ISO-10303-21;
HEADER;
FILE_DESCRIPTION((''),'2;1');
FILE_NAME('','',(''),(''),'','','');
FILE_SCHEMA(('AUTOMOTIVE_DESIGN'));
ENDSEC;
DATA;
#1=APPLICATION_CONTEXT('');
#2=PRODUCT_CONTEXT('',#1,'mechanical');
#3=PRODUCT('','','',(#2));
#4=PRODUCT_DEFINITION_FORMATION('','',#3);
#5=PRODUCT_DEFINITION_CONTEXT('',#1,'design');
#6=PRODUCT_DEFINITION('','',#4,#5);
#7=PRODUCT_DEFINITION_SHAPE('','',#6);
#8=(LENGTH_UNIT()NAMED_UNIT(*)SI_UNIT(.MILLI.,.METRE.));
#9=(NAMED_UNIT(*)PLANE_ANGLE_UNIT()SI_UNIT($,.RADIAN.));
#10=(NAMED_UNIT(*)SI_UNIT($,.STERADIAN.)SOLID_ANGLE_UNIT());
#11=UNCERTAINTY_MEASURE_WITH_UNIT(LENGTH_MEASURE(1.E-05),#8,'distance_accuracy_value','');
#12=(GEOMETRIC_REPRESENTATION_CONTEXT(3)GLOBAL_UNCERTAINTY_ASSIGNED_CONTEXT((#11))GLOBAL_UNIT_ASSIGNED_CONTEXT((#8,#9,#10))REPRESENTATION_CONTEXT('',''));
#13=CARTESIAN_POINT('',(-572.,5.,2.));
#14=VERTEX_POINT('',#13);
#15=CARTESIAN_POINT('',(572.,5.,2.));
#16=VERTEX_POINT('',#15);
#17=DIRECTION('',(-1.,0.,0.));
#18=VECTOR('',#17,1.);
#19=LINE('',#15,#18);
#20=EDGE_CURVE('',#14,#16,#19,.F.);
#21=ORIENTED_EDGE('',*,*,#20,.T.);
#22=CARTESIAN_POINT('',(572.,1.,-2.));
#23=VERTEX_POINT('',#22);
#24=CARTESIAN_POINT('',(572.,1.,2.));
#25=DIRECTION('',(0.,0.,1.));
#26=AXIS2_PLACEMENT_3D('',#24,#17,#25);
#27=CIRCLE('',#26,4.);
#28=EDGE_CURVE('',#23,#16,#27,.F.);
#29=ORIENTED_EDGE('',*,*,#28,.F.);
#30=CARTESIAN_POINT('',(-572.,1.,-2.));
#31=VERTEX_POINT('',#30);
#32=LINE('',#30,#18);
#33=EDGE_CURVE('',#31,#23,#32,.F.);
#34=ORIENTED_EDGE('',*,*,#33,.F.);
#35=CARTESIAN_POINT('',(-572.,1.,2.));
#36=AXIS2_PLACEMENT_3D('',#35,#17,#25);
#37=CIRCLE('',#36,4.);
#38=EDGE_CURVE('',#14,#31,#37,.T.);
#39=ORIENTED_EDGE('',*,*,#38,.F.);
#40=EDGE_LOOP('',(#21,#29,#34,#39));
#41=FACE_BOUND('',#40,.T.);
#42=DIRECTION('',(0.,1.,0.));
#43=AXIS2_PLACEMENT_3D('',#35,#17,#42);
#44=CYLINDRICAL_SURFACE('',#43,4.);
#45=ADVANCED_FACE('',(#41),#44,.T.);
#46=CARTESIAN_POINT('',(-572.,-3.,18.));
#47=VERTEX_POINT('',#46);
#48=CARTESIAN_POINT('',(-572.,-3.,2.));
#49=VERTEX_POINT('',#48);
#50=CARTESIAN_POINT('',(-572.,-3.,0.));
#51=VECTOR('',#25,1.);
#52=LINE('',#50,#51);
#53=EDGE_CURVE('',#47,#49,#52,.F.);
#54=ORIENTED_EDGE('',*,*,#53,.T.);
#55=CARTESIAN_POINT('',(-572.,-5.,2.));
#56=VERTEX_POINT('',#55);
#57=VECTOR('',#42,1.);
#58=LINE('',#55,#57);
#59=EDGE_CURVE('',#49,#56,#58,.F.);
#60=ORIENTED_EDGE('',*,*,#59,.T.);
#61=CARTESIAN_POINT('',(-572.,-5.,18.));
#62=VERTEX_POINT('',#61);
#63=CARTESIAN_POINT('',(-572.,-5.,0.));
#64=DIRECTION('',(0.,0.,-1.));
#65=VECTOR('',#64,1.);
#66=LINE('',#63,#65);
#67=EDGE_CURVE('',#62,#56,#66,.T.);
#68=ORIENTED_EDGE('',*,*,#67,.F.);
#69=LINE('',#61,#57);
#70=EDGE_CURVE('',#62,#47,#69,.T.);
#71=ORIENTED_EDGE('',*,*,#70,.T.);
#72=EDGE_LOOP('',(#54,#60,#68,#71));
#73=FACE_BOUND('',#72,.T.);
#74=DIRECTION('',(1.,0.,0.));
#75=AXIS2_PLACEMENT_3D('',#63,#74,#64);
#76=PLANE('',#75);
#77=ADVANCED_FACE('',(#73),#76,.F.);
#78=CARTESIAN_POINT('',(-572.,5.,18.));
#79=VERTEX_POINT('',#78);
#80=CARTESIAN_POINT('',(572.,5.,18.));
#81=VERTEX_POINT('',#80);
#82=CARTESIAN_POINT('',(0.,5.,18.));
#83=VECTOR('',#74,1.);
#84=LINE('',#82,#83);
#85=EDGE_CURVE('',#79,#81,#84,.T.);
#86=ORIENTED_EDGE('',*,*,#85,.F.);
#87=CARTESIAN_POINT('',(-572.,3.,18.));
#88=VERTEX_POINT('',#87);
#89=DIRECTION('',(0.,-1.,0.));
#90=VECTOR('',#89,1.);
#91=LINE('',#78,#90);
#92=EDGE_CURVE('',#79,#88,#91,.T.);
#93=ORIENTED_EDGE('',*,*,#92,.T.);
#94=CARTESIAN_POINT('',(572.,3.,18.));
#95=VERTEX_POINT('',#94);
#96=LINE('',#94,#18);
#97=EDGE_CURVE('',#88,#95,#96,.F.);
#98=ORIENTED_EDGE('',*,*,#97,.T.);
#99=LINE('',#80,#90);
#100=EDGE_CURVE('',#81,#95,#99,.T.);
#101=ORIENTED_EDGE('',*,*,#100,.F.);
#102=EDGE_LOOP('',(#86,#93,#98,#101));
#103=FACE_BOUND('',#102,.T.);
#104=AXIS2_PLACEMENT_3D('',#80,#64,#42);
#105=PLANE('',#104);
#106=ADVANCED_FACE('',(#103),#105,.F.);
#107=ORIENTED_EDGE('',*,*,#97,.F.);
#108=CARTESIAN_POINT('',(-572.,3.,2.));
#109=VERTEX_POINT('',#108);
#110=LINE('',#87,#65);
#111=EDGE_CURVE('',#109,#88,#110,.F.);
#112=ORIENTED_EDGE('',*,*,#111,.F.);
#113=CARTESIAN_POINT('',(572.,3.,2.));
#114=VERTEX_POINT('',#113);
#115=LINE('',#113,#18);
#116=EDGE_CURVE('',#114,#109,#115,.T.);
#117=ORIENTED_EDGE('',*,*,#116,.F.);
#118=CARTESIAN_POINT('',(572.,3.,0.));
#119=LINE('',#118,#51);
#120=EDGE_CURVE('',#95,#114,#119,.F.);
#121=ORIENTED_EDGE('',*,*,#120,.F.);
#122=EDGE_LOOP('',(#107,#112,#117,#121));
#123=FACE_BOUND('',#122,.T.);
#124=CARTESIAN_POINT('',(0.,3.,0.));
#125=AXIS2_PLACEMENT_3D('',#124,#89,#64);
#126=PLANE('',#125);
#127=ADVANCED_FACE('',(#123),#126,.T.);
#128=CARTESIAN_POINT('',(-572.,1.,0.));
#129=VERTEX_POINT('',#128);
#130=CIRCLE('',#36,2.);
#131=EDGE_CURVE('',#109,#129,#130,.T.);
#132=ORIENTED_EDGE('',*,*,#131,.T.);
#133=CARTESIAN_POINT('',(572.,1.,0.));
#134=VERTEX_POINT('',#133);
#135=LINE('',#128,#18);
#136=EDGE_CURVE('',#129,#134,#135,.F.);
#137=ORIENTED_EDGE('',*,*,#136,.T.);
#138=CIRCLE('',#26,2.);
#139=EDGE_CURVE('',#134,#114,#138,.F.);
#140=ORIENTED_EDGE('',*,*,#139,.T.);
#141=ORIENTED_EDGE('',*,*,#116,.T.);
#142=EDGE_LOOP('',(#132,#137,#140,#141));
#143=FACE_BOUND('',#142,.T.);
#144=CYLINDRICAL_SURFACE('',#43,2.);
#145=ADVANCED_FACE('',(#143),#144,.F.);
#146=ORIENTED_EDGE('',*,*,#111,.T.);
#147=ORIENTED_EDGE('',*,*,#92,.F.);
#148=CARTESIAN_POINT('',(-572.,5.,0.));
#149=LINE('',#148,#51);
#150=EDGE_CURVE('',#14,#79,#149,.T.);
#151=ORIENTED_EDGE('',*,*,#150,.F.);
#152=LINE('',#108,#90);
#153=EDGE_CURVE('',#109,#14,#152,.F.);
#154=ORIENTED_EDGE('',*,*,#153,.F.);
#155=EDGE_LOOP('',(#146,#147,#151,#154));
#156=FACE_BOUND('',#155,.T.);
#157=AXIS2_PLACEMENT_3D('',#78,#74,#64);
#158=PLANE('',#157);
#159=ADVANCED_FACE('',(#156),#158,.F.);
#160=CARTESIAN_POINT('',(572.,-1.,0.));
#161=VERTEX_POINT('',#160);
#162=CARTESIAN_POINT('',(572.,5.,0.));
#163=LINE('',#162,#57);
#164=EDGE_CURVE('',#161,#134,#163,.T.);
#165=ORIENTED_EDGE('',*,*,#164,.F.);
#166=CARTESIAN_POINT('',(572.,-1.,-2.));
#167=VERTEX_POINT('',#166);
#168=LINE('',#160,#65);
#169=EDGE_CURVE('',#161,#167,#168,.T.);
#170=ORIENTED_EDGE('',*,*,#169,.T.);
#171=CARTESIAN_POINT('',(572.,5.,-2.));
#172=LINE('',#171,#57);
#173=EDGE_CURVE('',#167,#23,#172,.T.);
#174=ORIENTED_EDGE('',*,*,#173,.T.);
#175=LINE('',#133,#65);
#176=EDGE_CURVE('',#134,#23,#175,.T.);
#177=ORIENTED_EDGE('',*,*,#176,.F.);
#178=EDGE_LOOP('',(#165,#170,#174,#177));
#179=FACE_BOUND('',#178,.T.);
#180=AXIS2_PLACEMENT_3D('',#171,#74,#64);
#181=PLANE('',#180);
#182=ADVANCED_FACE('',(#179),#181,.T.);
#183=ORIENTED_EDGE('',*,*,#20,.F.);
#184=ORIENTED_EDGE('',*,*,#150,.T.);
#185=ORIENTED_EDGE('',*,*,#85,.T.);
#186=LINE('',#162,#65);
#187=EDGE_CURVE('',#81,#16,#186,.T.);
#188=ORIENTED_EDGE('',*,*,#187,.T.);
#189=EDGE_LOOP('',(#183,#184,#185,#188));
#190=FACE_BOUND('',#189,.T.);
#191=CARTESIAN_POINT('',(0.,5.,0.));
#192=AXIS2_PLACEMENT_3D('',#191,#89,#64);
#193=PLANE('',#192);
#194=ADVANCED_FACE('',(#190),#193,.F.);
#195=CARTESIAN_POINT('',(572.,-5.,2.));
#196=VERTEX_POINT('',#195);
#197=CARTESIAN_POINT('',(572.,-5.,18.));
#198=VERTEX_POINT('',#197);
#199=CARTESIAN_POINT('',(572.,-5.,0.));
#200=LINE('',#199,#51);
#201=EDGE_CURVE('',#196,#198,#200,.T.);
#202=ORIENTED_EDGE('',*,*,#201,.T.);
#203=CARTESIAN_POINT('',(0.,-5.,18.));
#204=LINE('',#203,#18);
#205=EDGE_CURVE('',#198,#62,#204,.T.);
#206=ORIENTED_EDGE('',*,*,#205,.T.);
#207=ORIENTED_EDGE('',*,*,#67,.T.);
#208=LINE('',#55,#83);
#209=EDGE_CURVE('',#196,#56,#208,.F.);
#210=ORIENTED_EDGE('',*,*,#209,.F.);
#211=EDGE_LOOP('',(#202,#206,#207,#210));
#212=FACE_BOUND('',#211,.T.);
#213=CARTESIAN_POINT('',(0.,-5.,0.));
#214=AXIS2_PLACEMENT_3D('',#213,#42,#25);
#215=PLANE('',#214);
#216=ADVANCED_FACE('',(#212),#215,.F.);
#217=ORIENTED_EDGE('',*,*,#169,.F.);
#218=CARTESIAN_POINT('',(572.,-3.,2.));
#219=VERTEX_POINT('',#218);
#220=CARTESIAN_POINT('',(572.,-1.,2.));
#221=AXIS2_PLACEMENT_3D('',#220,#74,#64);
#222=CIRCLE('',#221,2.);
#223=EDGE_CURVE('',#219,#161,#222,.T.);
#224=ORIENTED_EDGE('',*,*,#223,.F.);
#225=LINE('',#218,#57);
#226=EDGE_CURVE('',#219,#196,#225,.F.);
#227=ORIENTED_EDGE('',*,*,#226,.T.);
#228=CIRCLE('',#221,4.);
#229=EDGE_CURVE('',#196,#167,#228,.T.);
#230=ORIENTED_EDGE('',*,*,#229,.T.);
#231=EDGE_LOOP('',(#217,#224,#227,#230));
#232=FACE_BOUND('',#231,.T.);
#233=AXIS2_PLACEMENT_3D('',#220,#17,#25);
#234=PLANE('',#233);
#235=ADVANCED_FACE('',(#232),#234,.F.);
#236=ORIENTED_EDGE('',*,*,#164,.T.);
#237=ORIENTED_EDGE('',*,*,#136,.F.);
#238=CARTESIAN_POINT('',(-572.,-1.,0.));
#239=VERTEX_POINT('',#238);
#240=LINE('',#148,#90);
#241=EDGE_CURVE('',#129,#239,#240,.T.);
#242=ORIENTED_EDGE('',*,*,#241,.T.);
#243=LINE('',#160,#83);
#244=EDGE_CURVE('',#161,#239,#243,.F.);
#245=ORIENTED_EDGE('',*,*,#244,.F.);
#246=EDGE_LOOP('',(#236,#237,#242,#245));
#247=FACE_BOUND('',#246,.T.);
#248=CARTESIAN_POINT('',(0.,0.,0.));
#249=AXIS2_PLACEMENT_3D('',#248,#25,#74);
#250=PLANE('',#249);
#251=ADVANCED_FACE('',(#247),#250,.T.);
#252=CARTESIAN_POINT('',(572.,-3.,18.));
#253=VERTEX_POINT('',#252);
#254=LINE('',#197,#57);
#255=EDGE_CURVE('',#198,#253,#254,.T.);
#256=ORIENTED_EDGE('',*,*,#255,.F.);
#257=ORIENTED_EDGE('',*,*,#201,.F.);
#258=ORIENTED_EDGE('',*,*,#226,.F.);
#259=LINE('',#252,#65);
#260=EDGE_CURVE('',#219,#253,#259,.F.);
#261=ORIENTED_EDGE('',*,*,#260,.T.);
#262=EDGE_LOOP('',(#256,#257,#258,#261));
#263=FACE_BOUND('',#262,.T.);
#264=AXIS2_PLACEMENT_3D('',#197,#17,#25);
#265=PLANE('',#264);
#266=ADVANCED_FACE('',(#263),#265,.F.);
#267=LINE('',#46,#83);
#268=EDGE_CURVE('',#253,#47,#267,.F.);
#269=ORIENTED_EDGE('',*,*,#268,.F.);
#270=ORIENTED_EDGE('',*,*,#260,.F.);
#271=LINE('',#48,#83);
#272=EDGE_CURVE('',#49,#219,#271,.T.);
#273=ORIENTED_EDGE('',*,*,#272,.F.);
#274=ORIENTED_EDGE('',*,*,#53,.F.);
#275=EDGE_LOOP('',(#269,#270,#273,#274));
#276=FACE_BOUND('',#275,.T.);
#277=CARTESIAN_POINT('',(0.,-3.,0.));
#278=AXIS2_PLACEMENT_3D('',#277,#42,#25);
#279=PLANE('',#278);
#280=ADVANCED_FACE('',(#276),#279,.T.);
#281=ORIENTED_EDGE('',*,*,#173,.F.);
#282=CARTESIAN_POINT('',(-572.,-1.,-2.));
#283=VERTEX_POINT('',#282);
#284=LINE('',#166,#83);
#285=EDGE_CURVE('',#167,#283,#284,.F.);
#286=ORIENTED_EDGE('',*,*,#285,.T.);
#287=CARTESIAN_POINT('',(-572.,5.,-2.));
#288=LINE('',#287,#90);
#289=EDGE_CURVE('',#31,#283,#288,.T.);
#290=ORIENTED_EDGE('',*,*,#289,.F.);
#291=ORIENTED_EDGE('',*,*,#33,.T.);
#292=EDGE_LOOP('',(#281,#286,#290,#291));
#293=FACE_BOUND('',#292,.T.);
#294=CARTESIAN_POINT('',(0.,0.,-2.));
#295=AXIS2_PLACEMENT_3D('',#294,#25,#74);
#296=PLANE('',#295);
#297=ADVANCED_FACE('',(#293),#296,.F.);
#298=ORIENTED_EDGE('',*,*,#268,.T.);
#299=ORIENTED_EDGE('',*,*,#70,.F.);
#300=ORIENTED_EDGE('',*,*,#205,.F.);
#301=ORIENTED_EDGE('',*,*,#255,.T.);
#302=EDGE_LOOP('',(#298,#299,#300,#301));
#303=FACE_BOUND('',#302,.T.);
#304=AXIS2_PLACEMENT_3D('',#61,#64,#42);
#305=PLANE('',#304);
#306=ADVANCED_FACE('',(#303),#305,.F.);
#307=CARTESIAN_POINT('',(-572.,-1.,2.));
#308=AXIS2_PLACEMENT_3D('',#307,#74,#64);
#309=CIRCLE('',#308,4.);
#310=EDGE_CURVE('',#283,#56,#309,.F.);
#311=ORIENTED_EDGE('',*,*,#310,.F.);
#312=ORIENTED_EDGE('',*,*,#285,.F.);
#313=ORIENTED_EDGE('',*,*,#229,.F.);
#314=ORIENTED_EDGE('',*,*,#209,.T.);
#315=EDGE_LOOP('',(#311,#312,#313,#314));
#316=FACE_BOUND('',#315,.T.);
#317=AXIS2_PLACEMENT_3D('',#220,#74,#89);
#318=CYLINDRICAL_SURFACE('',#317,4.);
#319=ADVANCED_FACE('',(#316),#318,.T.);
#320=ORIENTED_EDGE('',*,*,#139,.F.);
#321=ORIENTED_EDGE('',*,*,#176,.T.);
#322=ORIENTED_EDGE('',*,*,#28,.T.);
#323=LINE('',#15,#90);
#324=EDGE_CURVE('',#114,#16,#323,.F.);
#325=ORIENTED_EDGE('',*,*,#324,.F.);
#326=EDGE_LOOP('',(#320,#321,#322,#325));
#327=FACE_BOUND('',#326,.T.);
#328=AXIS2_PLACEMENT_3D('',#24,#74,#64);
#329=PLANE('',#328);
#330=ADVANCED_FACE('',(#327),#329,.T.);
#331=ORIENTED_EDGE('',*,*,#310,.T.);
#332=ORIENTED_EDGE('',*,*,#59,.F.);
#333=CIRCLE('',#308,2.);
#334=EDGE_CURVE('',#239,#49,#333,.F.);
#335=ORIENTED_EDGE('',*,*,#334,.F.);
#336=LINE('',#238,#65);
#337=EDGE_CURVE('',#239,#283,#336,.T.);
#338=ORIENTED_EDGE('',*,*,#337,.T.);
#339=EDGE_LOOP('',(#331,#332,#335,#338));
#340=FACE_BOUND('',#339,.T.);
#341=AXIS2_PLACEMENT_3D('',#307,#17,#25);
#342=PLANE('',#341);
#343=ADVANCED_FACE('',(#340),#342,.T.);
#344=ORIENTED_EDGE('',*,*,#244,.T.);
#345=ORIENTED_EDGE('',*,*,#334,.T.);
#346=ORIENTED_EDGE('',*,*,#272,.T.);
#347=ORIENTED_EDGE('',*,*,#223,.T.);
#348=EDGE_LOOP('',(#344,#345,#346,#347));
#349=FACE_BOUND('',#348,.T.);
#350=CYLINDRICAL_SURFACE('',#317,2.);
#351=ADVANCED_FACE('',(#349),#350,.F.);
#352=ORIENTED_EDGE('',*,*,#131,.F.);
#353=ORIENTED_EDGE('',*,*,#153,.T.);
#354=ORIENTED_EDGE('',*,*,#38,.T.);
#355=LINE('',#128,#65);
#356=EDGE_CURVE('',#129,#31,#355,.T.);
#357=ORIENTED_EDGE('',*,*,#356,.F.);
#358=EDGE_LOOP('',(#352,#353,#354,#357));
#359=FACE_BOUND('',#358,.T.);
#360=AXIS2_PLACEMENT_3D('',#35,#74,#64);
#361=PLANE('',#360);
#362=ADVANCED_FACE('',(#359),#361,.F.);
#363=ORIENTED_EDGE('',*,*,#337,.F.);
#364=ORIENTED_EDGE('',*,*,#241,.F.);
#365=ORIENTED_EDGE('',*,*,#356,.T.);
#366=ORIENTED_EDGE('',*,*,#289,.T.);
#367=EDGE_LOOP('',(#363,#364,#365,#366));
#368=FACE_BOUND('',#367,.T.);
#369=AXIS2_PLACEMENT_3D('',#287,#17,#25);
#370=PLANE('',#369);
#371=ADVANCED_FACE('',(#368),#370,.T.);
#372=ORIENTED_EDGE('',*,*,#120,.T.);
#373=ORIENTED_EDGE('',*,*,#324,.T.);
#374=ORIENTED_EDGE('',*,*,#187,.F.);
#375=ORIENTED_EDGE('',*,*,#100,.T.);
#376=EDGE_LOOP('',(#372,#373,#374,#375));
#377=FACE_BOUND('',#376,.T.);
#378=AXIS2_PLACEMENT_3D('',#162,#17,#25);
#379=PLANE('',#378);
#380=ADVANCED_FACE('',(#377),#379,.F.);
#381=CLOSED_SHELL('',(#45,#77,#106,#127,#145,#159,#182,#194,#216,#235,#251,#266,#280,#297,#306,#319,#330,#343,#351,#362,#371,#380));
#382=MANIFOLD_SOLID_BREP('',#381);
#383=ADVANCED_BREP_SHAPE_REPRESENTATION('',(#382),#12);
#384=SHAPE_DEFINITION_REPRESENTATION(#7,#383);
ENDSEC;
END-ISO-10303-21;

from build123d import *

# Parameters (mm, degrees)
SKETCH_1_W                         = 1144
SKETCH_1_H                         = 10
SM_BASE_FLANGE_1_DEPTH             = 2
SM_EDGE_FLANGE_1_STRIP_W           = 12
SM_EDGE_FLANGE_1_STRIP_H           = 2
SM_EDGE_FLANGE_1_STRIP_CUT_DEPTH   = 1144
SM_EDGE_FLANGE_1_STRIP_2_W         = 12
SM_EDGE_FLANGE_1_STRIP_2_H         = 2
SM_EDGE_FLANGE_1_STRIP_CUT_2_DEPTH = 1144
SM_EDGE_FLANGE_1_DEPTH             = 1144
SM_EDGE_FLANGE_1_BEND_DEPTH        = 1144


# Sheet-metal steps are written as plain solids
with BuildPart() as part:
    # Sketch 1 → 基体-法兰1 (new body)
    with BuildSketch(Plane.XY):
        Rectangle(SKETCH_1_W, SKETCH_1_H)
    extrude(amount=-SM_BASE_FLANGE_1_DEPTH)

    # 边线-法兰1 strip (across the edge) → 边线-法兰1 strip cut (cut)
    with BuildSketch(Plane(origin=(572, 5, 0), x_dir=(0, -1, 0), z_dir=(-1, 0, 0))):
        with Locations((-2, -1)):
            Rectangle(SM_EDGE_FLANGE_1_STRIP_W, SM_EDGE_FLANGE_1_STRIP_H)
    extrude(amount=SM_EDGE_FLANGE_1_STRIP_CUT_DEPTH, mode=Mode.SUBTRACT)

    # 边线-法兰1 strip 2 (across the edge) → 边线-法兰1 strip cut 2 (cut)
    with BuildSketch(Plane(origin=(-572, -5, 0), x_dir=(0, 1, 0), z_dir=(1, 0, 0))):
        with Locations((-2, -1)):
            Rectangle(SM_EDGE_FLANGE_1_STRIP_2_W, SM_EDGE_FLANGE_1_STRIP_2_H)
    extrude(amount=SM_EDGE_FLANGE_1_STRIP_CUT_2_DEPTH, mode=Mode.SUBTRACT)

    # 边线-法兰1 section (across the edge) → 边线-法兰1 (add)
    with BuildSketch(Plane(origin=(572, 5, 0), x_dir=(0, -1, 0), z_dir=(-1, 0, 0))):
        with BuildLine():
            Line((0, 2), (0, 18))
            Line((0, 18), (2, 18))
            Line((2, 18), (2, 2))
            ThreePointArc((2, 2), (2.585786438, 0.585786438), (4, 0))
            Line((4, 0), (4, -2))
            ThreePointArc((4, -2), (1.171572875, -0.828427125), (0, 2))
        make_face()
    extrude(amount=SM_EDGE_FLANGE_1_DEPTH)

    # 边线-法兰1 section 2 (across the edge) → 边线-法兰1 bend (add)
    with BuildSketch(Plane(origin=(-572, -5, 0), x_dir=(0, 1, 0), z_dir=(1, 0, 0))):
        with BuildLine():
            Line((0, 2), (0, 18))
            Line((0, 18), (2, 18))
            Line((2, 18), (2, 2))
            ThreePointArc((2, 2), (2.585786438, 0.585786438), (4, 0))
            Line((4, 0), (4, -2))
            ThreePointArc((4, -2), (1.171572875, -0.828427125), (0, 2))
        make_face()
    extrude(amount=SM_EDGE_FLANGE_1_BEND_DEPTH)


solid = part.part
